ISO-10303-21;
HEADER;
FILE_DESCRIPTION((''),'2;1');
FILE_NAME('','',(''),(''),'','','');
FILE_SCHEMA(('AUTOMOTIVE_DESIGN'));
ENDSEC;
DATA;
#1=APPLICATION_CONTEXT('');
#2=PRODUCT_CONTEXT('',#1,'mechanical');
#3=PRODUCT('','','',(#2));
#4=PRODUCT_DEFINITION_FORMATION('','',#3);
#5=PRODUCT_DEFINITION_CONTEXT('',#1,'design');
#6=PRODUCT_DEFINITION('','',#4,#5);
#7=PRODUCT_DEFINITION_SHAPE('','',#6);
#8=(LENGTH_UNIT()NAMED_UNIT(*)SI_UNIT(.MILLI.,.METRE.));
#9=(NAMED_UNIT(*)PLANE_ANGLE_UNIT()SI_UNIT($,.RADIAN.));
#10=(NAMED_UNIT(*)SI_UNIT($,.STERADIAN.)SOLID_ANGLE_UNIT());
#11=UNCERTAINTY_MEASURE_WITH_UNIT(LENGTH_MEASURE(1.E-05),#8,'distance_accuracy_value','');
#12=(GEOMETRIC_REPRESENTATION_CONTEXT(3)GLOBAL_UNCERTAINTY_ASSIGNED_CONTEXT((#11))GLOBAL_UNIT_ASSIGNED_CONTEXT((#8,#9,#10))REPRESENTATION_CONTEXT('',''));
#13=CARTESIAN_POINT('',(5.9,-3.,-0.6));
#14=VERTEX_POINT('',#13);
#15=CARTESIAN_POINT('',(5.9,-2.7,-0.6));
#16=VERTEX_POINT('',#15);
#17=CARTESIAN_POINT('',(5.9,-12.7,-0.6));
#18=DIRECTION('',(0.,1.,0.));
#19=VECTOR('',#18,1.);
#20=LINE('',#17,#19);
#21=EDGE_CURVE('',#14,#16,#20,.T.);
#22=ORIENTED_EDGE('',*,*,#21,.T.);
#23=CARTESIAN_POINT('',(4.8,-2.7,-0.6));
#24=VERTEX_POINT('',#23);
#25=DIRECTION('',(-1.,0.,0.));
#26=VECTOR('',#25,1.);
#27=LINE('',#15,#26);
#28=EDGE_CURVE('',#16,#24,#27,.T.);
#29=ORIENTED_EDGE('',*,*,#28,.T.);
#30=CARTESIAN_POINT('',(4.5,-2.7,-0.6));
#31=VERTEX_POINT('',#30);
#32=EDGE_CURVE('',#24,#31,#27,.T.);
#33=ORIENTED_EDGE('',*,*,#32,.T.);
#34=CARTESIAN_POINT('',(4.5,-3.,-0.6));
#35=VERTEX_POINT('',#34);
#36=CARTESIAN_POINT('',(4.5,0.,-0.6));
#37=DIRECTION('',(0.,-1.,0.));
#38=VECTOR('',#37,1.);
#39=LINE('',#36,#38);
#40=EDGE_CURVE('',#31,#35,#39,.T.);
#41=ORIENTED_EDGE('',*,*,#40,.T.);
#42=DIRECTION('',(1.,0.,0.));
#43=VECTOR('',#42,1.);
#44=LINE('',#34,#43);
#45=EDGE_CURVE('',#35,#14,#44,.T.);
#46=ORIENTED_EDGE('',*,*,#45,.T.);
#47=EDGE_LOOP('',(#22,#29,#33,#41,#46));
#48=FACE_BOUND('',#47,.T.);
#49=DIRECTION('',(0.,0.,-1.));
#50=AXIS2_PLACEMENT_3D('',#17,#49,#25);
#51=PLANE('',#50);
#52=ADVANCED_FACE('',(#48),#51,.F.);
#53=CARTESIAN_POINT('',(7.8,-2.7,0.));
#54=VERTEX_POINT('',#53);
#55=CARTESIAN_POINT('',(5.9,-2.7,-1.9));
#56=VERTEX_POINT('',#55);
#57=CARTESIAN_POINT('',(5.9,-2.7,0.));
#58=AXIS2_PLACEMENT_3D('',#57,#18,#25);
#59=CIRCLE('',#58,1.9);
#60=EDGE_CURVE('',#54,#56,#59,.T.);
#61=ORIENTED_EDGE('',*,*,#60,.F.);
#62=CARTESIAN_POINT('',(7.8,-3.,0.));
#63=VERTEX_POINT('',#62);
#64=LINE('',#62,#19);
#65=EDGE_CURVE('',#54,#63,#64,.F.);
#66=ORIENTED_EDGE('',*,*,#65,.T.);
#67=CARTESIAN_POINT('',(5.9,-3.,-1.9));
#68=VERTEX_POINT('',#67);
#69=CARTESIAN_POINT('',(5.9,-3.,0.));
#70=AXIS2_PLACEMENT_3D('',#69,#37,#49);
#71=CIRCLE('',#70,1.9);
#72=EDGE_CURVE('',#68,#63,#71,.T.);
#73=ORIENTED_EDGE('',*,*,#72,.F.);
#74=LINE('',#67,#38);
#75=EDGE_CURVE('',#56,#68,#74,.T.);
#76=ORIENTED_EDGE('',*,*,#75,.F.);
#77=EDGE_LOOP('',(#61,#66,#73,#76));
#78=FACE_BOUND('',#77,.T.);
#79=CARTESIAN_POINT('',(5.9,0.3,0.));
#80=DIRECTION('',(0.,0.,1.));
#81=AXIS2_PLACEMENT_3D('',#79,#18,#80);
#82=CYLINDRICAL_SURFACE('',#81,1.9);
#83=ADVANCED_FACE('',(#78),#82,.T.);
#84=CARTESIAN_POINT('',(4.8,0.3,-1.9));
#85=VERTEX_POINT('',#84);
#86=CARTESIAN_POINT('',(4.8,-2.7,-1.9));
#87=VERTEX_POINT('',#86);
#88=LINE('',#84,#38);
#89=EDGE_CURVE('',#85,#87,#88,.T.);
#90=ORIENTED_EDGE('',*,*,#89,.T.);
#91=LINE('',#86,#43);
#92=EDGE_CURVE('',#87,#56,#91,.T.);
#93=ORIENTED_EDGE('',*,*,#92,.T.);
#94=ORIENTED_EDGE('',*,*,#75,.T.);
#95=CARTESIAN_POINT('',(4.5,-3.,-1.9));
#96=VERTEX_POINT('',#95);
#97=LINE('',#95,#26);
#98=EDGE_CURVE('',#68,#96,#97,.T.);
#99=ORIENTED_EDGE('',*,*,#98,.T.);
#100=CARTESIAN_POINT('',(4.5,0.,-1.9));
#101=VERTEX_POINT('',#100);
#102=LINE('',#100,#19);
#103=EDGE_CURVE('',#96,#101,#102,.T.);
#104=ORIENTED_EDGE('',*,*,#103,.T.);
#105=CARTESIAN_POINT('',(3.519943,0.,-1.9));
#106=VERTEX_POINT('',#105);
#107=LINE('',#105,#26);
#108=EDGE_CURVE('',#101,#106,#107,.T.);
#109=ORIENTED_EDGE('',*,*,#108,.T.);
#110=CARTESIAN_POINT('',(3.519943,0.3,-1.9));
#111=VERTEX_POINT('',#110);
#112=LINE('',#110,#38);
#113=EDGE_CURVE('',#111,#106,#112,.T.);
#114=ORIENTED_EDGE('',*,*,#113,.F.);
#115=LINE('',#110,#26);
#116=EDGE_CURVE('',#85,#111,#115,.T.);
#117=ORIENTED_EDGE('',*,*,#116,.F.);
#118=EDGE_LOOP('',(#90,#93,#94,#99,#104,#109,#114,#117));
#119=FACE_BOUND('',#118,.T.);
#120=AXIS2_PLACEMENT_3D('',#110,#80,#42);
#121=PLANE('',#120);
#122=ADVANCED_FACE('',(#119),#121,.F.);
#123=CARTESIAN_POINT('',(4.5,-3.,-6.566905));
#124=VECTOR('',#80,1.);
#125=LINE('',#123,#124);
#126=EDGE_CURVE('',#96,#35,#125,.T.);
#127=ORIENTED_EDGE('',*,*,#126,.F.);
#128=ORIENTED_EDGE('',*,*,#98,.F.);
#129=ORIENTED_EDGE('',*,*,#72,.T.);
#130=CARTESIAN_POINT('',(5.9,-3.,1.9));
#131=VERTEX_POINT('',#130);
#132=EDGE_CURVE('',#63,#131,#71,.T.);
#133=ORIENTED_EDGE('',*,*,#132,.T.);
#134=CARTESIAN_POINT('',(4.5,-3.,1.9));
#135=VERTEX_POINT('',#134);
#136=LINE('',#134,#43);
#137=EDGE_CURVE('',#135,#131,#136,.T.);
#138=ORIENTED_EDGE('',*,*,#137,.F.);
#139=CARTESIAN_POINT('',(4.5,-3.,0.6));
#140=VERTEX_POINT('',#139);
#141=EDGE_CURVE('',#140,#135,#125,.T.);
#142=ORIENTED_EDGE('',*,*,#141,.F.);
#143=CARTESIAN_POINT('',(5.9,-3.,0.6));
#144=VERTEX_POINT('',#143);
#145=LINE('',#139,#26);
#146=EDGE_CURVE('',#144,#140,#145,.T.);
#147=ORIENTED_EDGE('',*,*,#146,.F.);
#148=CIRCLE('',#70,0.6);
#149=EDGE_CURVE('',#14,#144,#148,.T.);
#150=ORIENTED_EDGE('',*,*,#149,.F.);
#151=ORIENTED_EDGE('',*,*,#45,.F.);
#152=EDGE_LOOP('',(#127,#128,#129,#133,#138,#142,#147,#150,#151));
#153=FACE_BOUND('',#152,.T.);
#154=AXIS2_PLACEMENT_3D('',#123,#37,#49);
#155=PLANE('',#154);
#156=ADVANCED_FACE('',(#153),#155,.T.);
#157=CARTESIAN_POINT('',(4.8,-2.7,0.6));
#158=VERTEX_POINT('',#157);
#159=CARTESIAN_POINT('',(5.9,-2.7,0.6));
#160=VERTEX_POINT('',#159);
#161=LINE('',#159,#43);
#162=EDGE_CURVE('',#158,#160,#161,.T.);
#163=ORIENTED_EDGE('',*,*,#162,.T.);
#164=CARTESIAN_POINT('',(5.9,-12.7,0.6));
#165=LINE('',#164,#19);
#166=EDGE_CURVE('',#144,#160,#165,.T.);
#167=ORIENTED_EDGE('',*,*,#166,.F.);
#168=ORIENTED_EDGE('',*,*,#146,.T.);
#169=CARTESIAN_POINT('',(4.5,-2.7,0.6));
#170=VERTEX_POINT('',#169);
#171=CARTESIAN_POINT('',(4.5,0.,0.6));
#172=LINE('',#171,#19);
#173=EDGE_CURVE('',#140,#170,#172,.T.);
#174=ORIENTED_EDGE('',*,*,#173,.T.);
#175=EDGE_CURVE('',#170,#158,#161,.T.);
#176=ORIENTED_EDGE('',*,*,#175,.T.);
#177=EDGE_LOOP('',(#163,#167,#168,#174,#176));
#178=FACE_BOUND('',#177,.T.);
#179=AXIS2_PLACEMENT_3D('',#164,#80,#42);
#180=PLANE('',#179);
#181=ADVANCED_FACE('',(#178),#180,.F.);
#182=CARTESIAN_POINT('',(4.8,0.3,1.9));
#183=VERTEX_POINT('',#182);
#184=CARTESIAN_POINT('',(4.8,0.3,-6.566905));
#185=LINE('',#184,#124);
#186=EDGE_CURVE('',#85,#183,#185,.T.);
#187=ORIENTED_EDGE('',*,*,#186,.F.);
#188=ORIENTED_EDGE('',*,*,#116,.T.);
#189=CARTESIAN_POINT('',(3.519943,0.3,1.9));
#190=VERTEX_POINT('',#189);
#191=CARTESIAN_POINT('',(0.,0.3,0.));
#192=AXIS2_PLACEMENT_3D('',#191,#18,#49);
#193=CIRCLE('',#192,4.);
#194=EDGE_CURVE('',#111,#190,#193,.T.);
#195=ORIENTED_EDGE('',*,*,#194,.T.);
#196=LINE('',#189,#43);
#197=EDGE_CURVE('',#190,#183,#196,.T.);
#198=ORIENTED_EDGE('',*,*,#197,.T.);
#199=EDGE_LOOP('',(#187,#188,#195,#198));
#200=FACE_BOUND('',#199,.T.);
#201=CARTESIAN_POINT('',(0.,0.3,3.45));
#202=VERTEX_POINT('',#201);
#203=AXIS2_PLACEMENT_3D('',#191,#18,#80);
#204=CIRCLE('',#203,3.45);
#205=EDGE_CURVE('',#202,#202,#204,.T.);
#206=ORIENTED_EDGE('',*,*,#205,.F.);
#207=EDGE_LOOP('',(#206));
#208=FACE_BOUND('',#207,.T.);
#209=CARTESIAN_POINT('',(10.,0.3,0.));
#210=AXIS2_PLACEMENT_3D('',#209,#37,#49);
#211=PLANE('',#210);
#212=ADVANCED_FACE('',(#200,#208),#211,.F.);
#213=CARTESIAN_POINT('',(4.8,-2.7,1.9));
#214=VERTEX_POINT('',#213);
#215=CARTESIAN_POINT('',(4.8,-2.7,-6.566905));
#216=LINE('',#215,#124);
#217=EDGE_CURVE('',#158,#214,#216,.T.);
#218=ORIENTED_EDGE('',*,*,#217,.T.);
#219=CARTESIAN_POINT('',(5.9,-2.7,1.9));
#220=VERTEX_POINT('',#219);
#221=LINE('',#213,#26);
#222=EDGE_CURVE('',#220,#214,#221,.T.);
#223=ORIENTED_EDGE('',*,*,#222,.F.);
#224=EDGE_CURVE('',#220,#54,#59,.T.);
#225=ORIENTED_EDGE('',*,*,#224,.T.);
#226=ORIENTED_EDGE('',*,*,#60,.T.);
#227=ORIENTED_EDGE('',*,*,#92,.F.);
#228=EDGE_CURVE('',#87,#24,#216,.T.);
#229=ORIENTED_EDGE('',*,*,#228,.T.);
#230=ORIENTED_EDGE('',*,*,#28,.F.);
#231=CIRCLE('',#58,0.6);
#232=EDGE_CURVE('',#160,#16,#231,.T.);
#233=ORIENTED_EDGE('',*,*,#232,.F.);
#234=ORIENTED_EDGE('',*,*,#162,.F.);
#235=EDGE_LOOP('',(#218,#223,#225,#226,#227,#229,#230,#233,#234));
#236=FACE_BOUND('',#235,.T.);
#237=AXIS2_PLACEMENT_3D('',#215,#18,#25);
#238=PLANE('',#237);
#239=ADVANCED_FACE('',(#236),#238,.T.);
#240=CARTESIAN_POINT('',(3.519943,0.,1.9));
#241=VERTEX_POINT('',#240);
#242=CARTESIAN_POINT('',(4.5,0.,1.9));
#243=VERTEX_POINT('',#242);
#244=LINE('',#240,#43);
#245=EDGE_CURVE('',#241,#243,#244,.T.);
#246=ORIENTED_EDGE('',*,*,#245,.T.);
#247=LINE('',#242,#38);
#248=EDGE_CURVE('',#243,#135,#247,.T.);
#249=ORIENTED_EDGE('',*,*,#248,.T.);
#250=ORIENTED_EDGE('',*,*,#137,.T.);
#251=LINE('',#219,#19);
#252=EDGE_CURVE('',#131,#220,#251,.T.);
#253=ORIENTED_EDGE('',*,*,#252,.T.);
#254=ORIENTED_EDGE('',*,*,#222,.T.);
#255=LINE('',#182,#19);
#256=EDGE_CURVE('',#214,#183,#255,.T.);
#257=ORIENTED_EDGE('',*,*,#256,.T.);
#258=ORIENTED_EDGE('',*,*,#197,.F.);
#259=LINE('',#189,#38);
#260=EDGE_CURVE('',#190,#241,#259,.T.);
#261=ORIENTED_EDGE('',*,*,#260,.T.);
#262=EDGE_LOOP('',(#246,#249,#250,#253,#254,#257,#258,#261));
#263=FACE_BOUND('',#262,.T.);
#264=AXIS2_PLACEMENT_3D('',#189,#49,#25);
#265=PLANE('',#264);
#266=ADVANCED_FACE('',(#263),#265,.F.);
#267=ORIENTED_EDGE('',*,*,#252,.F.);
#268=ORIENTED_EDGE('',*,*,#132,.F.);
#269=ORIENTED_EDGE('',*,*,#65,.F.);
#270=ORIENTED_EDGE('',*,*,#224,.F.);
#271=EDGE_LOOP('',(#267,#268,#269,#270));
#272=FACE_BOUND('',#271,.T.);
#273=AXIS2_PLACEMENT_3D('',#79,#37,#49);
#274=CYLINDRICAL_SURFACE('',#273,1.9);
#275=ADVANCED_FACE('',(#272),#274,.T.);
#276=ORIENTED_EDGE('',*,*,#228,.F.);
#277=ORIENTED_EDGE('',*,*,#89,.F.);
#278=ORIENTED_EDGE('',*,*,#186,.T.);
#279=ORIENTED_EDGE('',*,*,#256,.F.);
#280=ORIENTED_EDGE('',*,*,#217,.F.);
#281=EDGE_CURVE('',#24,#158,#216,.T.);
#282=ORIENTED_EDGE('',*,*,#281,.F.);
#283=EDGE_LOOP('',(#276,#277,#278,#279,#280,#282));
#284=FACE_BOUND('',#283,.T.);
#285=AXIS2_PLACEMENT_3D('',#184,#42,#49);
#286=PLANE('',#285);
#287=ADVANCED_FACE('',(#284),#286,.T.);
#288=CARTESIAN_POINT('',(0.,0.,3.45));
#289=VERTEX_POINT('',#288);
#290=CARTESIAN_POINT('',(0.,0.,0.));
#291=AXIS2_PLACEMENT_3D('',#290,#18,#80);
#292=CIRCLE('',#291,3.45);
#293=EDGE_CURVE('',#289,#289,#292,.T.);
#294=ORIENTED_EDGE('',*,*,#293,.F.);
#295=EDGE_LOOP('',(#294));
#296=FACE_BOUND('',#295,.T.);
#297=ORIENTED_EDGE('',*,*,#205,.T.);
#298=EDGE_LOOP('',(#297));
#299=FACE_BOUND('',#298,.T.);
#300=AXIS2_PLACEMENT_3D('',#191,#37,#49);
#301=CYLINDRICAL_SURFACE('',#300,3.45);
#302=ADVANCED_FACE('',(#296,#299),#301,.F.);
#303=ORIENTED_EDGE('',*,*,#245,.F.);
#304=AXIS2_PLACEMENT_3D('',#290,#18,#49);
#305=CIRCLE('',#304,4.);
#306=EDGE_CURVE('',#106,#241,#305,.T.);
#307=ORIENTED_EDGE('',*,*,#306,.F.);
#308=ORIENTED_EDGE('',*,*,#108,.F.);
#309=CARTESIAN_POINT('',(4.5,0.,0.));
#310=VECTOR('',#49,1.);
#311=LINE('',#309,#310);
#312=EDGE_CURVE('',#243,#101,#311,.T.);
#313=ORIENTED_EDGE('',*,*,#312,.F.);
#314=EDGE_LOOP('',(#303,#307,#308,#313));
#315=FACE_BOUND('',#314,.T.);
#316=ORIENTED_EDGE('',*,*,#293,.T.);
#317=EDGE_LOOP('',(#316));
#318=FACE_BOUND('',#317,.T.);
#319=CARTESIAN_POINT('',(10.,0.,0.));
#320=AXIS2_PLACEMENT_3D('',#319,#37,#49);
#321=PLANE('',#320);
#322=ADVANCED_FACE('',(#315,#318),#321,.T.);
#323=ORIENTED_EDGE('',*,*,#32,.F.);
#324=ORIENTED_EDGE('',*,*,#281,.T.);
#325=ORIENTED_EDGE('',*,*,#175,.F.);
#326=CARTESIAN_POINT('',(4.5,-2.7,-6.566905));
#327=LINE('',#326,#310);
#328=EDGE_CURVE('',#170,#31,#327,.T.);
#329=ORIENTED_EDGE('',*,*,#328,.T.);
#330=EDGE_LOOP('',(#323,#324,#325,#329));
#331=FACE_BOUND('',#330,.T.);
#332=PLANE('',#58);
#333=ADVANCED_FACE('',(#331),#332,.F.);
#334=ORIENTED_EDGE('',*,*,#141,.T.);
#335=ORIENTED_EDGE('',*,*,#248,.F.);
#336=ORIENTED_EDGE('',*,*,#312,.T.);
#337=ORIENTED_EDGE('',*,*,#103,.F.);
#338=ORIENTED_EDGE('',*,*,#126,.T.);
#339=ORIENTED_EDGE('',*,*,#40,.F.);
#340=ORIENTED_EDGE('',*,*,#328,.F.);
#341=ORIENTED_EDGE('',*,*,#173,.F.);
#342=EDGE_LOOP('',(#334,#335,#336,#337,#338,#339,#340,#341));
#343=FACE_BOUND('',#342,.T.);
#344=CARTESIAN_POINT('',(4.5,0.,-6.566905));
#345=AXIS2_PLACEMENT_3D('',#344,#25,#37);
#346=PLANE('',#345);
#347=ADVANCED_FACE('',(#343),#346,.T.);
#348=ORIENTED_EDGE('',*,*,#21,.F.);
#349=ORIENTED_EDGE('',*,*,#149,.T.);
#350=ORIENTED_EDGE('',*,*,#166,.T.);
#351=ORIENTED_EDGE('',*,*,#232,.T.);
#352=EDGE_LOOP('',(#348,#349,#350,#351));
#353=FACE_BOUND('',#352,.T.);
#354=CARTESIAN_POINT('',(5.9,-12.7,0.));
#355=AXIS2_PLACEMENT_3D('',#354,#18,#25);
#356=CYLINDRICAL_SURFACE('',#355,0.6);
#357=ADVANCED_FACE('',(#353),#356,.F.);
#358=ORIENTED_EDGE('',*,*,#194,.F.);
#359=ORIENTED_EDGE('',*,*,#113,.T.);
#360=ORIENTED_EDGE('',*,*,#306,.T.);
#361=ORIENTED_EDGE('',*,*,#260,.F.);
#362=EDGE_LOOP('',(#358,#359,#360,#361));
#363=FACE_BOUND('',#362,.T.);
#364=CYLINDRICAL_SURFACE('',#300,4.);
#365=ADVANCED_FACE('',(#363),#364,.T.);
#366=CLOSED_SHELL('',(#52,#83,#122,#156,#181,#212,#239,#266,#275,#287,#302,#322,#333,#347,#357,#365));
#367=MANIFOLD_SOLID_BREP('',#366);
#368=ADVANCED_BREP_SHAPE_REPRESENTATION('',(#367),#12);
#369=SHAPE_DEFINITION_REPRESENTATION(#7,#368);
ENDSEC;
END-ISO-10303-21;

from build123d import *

# Parameters (mm, degrees)
SKETCH_1_R          = 3.45
EXTRUDE_1_DEPTH     = 0.3
SKETCH_2_W          = 8.378641338
SKETCH_2_H          = 6.913843901
CUT_EXTRUDE_1_DEPTH = 10
EXTRUDE_2_DEPTH     = 3.8
FILLET_1_R          = 1.9
CUT_EXTRUDE_2_DEPTH = 10


with BuildPart() as part:
    # 草图1 → 凸台-拉伸1 (new body)
    with BuildSketch(Plane(origin=(0, 0, 0), x_dir=(1, 0, 0), z_dir=(0, 1, 0))):
        with BuildLine():
            Line((3.519943181, 1.9), (10, 1.9))
            ThreePointArc((10, 1.9), (11.9, 0), (10, -1.9))
            Line((10, -1.9), (3.519943181, -1.9))
            ThreePointArc((3.519943181, -1.9), (-4, 0), (3.519943181, 1.9))
        make_face()
        with Locations(Location((0, 0, 0), (0, 0, 270))):
            Circle(SKETCH_1_R, mode=Mode.SUBTRACT)
        with BuildLine():
            Line((10, -0.6), (8.5, -0.6))
            ThreePointArc((8.5, -0.6), (7.9, 0), (8.5, 0.6))
            Line((8.5, 0.6), (10, 0.6))
            ThreePointArc((10, 0.6), (10.6, 0), (10, -0.6))
        make_face(mode=Mode.SUBTRACT)
    extrude(amount=EXTRUDE_1_DEPTH)

    # 草图2 → 切除-拉伸1 (cut)
    with BuildSketch(Plane(origin=(0, 0.3, 0), x_dir=(1, 0, 0), z_dir=(0, 1, 0))):
        with Locations((8.689320669, -0.04590274)):
            Rectangle(SKETCH_2_W, SKETCH_2_H)
    extrude(amount=-CUT_EXTRUDE_1_DEPTH, mode=Mode.SUBTRACT)

    # 草图3 → 凸台-拉伸2 (add)
    with BuildSketch(Plane.XY.offset(1.9)):
        Polygon((4.5, 0.3), (4.8, 0.3), (4.8, -2.7), (7.8, -2.7), (7.8, -3), (4.5, -3), (4.5, 0), align=None)
    extrude(amount=-EXTRUDE_2_DEPTH)

    # 圆角1
    fillet_1_edges = [part.edges().sort_by_distance(p)[0] for p in [
        (7.8, -2.85, -1.9),
        (7.8, -2.85, 1.9),
    ]]
    fillet(fillet_1_edges, radius=FILLET_1_R - 0.0001)  # a hair under: the kernel refuses the full size

    # 草图4 → 切除-拉伸2 (cut)
    with BuildSketch(Plane(origin=(0, -2.7, 0), x_dir=(1, 0, 0), z_dir=(0, 1, 0))):
        with BuildLine():
            Line((5.9, -0.6), (4.4, -0.6))
            ThreePointArc((4.4, -0.6), (3.8, 0), (4.4, 0.6))
            Line((4.4, 0.6), (5.9, 0.6))
            ThreePointArc((5.9, 0.6), (6.5, 0), (5.9, -0.6))
        make_face()
    extrude(amount=-CUT_EXTRUDE_2_DEPTH, mode=Mode.SUBTRACT)


solid = part.part
